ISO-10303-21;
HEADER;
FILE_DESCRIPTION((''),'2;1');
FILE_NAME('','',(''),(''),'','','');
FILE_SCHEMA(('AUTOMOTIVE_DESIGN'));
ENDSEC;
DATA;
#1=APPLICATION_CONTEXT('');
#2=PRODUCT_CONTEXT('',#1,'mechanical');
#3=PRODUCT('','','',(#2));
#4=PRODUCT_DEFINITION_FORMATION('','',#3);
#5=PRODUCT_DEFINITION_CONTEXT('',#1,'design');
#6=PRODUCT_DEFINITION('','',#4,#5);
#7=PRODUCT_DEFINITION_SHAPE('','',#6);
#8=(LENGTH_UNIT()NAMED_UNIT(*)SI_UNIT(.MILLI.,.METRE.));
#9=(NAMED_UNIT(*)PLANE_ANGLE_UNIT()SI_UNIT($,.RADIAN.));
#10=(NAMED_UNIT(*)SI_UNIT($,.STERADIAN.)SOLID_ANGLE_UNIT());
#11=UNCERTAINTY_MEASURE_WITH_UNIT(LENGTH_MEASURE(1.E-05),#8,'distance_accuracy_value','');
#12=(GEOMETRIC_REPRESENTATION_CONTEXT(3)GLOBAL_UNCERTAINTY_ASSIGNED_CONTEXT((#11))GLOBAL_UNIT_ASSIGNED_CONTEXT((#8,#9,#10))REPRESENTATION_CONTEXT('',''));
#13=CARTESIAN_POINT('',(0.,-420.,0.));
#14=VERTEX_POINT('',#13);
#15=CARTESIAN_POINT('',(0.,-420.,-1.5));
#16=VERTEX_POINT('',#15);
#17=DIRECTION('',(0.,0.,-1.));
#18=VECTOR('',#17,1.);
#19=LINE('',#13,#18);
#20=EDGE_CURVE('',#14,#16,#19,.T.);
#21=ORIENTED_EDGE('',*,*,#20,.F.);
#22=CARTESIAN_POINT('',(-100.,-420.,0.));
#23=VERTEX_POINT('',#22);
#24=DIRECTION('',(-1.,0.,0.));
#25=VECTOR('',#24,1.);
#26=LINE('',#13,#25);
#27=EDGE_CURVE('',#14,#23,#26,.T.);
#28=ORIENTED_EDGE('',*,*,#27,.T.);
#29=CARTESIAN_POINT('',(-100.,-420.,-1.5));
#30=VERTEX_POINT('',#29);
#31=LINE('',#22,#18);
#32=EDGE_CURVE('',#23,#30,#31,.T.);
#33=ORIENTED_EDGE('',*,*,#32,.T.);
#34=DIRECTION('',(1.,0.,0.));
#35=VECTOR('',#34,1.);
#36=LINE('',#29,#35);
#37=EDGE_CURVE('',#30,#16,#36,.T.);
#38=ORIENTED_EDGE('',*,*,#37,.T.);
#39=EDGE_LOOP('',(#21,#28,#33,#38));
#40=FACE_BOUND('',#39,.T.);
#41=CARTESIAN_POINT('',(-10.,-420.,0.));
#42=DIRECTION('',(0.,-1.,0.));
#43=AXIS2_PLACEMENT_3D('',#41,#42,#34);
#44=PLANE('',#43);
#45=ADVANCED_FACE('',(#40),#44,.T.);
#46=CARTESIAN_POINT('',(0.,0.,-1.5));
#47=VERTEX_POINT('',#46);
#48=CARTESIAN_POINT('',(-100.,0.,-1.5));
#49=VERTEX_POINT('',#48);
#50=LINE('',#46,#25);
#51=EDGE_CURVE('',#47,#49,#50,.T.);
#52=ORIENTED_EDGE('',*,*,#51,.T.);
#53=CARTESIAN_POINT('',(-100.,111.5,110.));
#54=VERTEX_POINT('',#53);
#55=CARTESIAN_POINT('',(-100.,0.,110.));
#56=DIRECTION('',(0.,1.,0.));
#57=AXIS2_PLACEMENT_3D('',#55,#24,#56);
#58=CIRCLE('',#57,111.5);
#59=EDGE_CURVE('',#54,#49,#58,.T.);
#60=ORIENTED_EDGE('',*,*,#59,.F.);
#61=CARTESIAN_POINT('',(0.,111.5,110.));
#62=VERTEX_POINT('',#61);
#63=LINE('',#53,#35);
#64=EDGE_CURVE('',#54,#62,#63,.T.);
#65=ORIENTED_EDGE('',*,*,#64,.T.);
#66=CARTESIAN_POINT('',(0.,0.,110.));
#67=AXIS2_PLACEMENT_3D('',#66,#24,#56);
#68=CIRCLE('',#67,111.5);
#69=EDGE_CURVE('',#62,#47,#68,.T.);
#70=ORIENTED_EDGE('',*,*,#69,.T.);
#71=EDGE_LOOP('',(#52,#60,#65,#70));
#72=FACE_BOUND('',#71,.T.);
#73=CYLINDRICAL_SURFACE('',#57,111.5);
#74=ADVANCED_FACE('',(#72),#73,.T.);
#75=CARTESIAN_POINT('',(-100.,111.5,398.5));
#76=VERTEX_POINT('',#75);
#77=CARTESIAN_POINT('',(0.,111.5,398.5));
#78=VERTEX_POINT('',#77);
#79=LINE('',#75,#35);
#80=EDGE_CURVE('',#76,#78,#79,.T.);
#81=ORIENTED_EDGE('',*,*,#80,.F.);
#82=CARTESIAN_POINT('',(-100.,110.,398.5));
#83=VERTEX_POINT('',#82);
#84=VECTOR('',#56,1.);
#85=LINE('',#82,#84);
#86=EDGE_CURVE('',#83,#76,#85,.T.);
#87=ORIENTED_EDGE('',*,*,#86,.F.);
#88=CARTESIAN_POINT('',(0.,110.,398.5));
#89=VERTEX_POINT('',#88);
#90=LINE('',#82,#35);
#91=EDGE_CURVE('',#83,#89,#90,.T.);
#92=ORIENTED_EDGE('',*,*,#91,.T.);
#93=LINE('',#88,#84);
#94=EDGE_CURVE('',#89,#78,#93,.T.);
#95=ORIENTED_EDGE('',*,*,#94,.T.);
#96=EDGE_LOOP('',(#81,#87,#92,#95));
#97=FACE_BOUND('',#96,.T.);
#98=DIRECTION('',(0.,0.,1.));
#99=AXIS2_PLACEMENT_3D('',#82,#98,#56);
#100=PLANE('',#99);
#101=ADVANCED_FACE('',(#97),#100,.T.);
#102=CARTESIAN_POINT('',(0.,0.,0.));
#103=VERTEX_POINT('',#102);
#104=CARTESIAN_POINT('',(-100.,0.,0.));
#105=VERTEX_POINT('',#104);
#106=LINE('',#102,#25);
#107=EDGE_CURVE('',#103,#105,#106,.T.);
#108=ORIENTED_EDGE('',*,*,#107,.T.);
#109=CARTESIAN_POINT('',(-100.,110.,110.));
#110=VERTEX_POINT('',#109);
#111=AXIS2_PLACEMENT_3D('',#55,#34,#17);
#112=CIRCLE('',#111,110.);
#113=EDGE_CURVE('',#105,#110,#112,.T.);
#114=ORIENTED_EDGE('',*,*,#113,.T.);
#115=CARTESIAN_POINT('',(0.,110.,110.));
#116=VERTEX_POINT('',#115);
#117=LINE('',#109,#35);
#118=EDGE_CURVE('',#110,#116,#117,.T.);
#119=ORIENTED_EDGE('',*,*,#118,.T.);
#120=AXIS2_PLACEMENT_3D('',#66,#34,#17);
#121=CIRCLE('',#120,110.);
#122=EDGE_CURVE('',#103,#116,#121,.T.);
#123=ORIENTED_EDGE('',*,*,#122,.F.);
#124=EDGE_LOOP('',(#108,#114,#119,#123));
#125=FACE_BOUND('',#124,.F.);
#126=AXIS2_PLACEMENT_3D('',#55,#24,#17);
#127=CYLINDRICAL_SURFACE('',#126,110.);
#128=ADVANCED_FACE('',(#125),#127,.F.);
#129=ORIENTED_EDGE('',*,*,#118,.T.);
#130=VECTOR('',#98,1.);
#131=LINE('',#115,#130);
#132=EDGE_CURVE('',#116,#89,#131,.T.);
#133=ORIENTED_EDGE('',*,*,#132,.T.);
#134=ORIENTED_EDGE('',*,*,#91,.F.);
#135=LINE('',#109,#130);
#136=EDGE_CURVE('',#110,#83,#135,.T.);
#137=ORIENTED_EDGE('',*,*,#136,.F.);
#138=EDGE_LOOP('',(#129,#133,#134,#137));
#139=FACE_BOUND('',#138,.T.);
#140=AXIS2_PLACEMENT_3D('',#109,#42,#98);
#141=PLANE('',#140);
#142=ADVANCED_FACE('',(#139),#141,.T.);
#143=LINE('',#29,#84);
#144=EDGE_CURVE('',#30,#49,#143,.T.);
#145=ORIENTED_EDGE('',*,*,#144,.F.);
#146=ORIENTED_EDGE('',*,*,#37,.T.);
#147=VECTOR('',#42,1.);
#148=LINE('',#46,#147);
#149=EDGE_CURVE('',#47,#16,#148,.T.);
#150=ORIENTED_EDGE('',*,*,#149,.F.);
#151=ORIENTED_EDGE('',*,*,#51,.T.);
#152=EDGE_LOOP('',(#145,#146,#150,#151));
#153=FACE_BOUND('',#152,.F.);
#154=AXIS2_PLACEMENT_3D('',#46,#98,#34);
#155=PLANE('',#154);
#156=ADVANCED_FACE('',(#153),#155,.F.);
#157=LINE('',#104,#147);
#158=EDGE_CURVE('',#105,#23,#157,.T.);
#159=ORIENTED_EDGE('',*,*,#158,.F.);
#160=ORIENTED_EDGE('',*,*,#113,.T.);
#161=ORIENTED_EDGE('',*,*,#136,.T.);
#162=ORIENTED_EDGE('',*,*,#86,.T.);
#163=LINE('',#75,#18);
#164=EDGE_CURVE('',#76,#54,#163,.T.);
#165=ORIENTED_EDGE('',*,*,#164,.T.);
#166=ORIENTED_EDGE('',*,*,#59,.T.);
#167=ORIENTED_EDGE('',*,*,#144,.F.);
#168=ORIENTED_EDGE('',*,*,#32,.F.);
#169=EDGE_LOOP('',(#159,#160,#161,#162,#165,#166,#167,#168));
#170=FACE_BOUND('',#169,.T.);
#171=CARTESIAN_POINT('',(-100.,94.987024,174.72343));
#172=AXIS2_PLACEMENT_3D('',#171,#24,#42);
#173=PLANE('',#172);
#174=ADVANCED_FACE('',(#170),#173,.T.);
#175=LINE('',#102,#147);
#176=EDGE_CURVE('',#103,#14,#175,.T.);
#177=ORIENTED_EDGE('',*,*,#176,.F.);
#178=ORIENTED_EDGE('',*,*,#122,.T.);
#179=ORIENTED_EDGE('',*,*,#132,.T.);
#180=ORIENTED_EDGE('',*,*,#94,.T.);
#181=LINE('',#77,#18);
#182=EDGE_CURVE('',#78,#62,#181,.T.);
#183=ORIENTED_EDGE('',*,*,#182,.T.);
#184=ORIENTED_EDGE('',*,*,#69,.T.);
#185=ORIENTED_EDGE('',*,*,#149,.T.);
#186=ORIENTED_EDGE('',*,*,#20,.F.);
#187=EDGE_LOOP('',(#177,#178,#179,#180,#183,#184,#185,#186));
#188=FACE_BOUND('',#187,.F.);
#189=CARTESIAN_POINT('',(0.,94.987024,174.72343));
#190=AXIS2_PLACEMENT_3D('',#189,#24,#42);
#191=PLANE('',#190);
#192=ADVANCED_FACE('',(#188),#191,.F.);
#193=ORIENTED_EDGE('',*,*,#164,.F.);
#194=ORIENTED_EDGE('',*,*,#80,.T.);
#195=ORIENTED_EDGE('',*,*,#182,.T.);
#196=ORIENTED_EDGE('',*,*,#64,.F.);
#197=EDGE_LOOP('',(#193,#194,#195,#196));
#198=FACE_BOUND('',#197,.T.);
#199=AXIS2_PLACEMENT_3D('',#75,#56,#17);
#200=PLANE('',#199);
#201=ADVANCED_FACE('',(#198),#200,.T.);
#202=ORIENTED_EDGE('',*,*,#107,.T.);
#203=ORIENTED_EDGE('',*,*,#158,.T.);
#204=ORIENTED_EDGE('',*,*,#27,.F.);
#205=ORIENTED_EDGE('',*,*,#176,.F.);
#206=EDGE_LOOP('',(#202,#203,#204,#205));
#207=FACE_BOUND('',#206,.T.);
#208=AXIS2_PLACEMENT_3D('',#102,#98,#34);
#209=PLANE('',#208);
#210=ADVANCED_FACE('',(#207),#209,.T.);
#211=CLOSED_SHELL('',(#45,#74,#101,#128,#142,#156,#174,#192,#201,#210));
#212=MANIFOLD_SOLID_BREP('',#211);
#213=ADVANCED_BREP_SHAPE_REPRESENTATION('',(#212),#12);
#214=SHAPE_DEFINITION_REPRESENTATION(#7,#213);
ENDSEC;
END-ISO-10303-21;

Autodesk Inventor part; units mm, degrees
ref_plane "YZ Plane" through (0, 0, 0) normal (1, 0, 0) x (0, 1, 0)
ref_plane "XZ Plane" through (0, 0, 0) normal (0, 1, 0) x (-1, 0, 0)
ref_plane "XY Plane" through (0, 0, 0) normal (0, 0, 1) x (1, 0, 0)
ref_plane "Work Plane1" through (0, 0, 0) normal (0, 0, 1) x (1, 0, 0)
ref_plane "Work Plane2" through (0, 110, 380) normal (0, -1, 0) x (-1, 0, 0)
sketch "Sketch1" plane through (0, 0, 0) normal (0, 0, 1) x (1, 0, 0)
  line L0 (0, 0) -> (0, -840)
  line L1 (0, 0) -> (-100, 0)
  line L2 (-100, 0) -> (-100, -140)
  line L3 (-10, -140) -> (-100, -140)
  line L4 (-10, -140) -> (-10, -700)
  line L5 (-10, -700) -> (-100, -700)
  line L6 (-100, -700) -> (-100, -840)
  line L7 (0, -840) -> (-100, -840)
  line L8 (-100, -140) -> (-100, -700)
  line L9 (-100, -420) -> (0, -420)
extrude "Plate1" add sketch "Sketch1" against normal blind 1.5 contours L0 L9 L4 L3 L2 L1 | L9 L8 L3 L4
ref_plane "Work Plane3" through (0, 111.5, 380) normal (0, -1, 0) x (-1, 0, 0)
sketch "Sketch2" plane through (0, 111.5, 380) normal (0, -1, 0) x (-1, 0, 0)
  line L0 (0, 380) -> (100, 380)
  line L1 (100, 380) -> (100, -18.5)
  line L2 (100, -18.5) -> (0, -18.5)
  line L3 (0, -18.5) -> (0, 380)
edge flange "Flange1" height 400 angle 90 thickness 1.5 bend radius 110 thickness toward (0, -1, 0) relief tear relief width 1.5 relief depth 0.75 edges at (-50, 0, 0) wall of the first edge with corners at (0, 111.5, 0) (-100, 111.5, 0) (-100, 111.5, 398.5) (0, 111.5, 398.5)
bend "Bend1"
corner "Corner1"
equation "\"d0\" = Thickness"
equation "\"d2\" = BendReliefWidth"
equation "\"d3\" = BendReliefDepth"
equation "\"d4\" = MinimumRemnant"
equation "\"d5\" = TransitionRadius"
equation "\"d9\" = CornerReliefSize"
equation "\"d10\" = GapSize"
equation "\"d11\" = JacobiRadiusSize"
equation "\"BendRadius\" = Thickness"
equation "\"BendReliefWidth\" = Thickness"
equation "\"BendReliefDepth\" = 0.5 * Thickness"
equation "\"CornerReliefSize\" = 4 * Thickness"
equation "\"MinimumRemnant\" = 2 * Thickness"
equation "\"TransitionRadius\" = BendRadius"
equation "\"JacobiRadiusSize\" = BendRadius"
equation "\"GapSize\" = Thickness"
equation "\"Thickness\" = 1.5"
properties part number "CARCASA_ALUM_9"
